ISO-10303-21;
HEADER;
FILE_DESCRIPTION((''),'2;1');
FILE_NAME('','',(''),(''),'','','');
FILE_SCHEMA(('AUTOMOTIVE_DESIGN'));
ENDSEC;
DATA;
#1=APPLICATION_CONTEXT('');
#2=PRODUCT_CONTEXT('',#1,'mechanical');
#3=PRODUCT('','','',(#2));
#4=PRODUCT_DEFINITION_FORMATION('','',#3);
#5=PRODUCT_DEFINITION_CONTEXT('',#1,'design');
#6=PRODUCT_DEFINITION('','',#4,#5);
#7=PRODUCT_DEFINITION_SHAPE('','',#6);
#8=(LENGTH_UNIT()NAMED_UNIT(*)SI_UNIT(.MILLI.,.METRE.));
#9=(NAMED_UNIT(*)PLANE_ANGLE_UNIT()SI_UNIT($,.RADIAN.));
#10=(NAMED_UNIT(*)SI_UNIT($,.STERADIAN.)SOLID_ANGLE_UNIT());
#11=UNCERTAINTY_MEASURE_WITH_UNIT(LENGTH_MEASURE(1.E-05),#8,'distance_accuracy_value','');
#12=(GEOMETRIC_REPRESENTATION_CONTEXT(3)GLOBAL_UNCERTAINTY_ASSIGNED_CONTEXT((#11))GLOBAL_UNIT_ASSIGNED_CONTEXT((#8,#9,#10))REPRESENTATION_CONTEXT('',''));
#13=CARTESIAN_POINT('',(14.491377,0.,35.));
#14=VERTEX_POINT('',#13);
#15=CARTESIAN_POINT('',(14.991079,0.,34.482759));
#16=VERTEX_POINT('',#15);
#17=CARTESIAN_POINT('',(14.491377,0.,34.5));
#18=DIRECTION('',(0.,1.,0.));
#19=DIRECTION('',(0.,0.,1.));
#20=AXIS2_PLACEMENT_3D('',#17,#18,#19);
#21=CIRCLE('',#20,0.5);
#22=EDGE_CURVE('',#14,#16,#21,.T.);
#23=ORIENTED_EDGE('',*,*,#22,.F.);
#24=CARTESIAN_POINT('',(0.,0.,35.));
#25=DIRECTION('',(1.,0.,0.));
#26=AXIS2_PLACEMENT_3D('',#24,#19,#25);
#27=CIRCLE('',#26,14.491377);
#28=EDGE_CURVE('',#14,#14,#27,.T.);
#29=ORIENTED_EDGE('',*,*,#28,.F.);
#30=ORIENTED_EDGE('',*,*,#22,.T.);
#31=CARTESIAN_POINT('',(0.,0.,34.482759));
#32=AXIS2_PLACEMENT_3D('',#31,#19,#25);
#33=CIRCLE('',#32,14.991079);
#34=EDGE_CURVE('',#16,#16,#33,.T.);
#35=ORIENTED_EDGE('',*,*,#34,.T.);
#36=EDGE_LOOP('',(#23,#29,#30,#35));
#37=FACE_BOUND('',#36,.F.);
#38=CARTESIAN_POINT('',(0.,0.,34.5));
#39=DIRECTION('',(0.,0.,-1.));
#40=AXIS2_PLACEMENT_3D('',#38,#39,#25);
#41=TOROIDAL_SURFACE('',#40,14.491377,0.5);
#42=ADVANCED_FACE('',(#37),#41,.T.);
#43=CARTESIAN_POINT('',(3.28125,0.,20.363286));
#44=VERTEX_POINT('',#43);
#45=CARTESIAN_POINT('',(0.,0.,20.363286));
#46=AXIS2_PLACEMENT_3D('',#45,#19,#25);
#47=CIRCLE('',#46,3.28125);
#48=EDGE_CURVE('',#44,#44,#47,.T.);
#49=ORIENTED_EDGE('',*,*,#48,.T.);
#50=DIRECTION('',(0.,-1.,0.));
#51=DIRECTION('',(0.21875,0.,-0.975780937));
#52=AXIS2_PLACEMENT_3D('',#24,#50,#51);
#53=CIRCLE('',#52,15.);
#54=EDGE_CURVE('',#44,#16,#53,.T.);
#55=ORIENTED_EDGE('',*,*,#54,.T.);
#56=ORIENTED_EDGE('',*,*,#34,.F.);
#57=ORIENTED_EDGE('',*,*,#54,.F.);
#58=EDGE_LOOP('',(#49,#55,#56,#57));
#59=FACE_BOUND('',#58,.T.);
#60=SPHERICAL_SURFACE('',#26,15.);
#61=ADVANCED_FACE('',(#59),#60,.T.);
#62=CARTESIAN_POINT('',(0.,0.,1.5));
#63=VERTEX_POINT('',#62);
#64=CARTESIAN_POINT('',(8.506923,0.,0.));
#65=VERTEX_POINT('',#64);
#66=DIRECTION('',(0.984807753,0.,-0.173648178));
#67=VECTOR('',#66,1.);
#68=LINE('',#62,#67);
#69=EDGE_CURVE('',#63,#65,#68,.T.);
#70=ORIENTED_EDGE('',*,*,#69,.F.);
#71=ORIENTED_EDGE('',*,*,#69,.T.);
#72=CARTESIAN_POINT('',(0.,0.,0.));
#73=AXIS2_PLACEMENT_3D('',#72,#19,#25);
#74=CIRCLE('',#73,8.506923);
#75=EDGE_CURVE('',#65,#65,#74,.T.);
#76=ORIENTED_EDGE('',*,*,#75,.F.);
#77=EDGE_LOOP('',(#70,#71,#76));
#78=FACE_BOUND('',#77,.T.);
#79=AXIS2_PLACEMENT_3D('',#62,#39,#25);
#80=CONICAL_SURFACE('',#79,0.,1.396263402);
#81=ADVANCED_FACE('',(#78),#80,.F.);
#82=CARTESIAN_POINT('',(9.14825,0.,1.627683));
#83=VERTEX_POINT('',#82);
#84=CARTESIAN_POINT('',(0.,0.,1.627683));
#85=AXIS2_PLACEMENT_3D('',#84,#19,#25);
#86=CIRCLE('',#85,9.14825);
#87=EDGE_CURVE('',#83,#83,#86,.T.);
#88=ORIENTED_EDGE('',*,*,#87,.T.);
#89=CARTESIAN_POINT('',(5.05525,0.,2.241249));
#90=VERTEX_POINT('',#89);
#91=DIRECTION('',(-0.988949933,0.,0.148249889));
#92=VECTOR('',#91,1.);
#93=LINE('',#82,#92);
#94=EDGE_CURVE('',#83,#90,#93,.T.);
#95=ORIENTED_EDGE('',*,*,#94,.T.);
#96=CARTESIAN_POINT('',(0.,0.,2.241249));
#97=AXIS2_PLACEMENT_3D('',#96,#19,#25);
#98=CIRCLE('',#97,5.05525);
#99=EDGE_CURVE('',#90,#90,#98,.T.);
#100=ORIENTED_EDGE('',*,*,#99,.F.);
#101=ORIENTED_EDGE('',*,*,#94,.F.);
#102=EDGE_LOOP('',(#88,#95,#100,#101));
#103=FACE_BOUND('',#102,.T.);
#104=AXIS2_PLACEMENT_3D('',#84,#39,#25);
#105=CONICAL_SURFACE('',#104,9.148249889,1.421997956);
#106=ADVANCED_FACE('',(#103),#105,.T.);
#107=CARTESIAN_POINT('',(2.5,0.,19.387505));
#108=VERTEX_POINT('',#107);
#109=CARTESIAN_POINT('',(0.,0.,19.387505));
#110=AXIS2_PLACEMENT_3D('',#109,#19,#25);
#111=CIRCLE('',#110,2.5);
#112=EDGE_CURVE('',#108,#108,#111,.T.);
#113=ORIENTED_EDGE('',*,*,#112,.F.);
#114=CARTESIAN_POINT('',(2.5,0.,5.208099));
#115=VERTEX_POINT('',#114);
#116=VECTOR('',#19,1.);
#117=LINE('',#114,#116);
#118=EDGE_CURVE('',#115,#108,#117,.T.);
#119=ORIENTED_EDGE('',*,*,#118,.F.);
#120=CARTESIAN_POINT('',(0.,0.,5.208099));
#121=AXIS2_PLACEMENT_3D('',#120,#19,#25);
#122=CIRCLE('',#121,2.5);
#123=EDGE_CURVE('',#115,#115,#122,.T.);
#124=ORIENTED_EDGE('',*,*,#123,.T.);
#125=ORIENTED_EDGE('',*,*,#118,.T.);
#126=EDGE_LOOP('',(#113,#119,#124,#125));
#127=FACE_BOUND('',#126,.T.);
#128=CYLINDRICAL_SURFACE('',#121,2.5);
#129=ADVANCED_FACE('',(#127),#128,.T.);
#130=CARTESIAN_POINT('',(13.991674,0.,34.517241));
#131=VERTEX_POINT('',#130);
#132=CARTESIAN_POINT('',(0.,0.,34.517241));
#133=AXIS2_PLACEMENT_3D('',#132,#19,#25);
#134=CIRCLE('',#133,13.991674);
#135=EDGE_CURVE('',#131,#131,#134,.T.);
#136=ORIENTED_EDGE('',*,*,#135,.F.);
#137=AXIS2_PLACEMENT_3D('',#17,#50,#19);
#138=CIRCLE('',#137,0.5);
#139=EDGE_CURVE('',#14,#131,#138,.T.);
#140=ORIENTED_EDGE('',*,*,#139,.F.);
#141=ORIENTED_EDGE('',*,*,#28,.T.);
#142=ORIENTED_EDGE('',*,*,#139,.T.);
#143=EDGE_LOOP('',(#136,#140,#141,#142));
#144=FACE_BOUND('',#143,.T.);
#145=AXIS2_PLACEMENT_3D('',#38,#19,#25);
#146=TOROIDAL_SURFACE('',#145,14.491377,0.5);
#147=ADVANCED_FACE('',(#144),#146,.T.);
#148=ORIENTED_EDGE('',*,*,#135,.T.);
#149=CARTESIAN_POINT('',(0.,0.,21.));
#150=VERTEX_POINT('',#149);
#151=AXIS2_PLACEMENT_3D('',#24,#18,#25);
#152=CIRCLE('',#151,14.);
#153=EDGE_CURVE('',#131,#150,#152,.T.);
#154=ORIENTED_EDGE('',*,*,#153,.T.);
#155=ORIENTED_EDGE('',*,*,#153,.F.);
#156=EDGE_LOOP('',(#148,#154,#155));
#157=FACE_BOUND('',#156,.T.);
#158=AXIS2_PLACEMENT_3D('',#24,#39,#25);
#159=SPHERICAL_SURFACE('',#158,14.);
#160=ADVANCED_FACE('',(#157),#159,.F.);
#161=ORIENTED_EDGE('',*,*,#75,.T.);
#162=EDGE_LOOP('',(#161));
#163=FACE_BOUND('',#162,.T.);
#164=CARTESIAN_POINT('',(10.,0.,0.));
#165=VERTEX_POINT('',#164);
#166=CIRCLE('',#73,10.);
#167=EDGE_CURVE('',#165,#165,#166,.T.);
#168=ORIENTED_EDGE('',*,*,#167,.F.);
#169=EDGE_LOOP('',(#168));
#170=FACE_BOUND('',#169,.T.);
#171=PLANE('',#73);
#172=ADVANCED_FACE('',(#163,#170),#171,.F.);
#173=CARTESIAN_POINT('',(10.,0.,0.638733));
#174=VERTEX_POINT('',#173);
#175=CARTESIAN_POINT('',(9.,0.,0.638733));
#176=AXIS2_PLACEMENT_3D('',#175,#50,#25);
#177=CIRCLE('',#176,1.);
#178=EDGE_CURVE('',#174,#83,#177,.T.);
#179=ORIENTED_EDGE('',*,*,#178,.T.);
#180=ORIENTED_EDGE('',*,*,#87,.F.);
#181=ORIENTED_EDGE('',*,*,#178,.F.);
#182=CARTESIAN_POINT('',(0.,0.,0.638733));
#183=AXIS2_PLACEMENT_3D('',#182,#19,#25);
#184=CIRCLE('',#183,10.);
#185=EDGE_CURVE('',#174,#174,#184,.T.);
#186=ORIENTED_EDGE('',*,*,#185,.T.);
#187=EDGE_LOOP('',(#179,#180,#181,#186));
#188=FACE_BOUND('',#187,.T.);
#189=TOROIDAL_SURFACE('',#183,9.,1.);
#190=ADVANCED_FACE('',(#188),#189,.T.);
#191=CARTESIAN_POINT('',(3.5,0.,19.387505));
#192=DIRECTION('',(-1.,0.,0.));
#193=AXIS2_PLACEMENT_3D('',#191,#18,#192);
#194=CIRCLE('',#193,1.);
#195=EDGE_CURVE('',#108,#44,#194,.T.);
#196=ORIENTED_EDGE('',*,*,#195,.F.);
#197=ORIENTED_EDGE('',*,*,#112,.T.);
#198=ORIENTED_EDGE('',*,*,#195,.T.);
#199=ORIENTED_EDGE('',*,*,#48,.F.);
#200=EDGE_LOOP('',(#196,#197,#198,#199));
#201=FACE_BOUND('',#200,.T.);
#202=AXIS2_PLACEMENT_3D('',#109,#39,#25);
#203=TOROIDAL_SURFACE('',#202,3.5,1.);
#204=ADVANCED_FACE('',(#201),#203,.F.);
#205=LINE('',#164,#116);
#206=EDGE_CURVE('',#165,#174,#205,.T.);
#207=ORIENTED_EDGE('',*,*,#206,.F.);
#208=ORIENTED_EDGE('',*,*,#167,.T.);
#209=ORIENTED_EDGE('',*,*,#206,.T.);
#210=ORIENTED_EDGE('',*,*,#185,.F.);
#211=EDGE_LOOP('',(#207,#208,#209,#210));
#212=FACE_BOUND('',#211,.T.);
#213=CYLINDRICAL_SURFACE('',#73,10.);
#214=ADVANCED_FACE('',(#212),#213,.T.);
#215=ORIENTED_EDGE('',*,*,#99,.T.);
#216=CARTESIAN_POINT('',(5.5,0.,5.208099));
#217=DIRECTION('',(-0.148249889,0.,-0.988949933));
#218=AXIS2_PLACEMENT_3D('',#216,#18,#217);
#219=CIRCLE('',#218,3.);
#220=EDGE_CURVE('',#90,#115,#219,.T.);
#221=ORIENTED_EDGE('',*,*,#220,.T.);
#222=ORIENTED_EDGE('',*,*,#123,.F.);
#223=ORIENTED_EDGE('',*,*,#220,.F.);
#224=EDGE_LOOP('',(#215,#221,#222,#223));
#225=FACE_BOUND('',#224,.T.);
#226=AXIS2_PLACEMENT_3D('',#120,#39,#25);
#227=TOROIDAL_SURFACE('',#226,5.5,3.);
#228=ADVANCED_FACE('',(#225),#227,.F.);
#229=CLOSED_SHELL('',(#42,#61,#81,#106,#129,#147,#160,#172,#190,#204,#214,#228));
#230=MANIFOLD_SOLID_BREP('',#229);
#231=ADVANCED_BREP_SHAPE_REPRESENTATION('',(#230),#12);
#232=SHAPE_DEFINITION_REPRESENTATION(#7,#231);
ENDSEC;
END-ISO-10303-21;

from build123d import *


# Not quite as in the source:
# - a fillet or chamfer that OpenCascade refuses, or shapes differently, is made with other operations: its cross-section is extruded or revolved along the edge and cut away or added


with BuildPart() as f1:
    # F0 (on Front) → F1 (revolve)
    with BuildSketch(Plane.XZ):
        with BuildLine():
            Line((0, 21), (0, 1.5))
            Line((0, 1.5), (8.5069227294, 0))
            Line((8.5069227294, 0), (10, 0))
            Line((10, 0), (10, 0.638732829))
            ThreePointArc((10, 0.638732829), (9.7577103301, 1.2913238615), (9.1482498888, 1.6276827623))
            Line((9.1482498888, 1.6276827623), (5.0552503337, 2.2412494438))
            ThreePointArc((5.0552503337, 2.2412494438), (3.2268690096, 3.2503261462), (2.5, 5.2080992435))
            Line((2.5, 5.2080992435), (2.5, 19.387505004))
            ThreePointArc((2.5, 19.387505004), (2.7193752502, 20.012505004), (3.28125, 20.3632859413))
            ThreePointArc((3.28125, 20.3632859413), (11.709371247, 25.625), (15, 35))
            Line((15, 35), (14, 35))
            ThreePointArc((14, 35), (9.8994949366, 25.1005050634), (0, 21))
        make_face()
    revolve(axis=Axis((0, 0, 19.0814351663), (0, 0, 1)))

    # F2: fillet of radius 0.5 on 2 edges, made by hand

    # F2_s1 → F2_t2 (revolve, cut)
    with BuildSketch(Plane.XZ):
        with BuildLine():
            ThreePointArc((14.4913767462, 35), (14.1439725793, 34.8595974761), (13.9916740998, 34.5172413793))
            ThreePointArc((13.9916740998, 34.5172413793), (13.9979183702, 34.7585847941), (14, 35))
            Line((14, 35), (14.4913767462, 35))
        make_face()
    revolve(axis=Axis((0, 0, 35), (0, 0, 1)), mode=Mode.SUBTRACT)

    # F2_s3 → F2_t4 (revolve, cut)
    with BuildSketch(Plane.XZ):
        with BuildLine():
            ThreePointArc((14.4913767462, 35), (14.8509742223, 34.8474041669), (14.9910793926, 34.4827586207))
            ThreePointArc((14.9910793926, 34.4827586207), (14.9977696823, 34.7413408509), (15, 35))
            Line((15, 35), (14.4913767462, 35))
        make_face()
    revolve(axis=Axis((0, 0, 35), (0, 0, 1)), mode=Mode.SUBTRACT)


solid = f1.part
